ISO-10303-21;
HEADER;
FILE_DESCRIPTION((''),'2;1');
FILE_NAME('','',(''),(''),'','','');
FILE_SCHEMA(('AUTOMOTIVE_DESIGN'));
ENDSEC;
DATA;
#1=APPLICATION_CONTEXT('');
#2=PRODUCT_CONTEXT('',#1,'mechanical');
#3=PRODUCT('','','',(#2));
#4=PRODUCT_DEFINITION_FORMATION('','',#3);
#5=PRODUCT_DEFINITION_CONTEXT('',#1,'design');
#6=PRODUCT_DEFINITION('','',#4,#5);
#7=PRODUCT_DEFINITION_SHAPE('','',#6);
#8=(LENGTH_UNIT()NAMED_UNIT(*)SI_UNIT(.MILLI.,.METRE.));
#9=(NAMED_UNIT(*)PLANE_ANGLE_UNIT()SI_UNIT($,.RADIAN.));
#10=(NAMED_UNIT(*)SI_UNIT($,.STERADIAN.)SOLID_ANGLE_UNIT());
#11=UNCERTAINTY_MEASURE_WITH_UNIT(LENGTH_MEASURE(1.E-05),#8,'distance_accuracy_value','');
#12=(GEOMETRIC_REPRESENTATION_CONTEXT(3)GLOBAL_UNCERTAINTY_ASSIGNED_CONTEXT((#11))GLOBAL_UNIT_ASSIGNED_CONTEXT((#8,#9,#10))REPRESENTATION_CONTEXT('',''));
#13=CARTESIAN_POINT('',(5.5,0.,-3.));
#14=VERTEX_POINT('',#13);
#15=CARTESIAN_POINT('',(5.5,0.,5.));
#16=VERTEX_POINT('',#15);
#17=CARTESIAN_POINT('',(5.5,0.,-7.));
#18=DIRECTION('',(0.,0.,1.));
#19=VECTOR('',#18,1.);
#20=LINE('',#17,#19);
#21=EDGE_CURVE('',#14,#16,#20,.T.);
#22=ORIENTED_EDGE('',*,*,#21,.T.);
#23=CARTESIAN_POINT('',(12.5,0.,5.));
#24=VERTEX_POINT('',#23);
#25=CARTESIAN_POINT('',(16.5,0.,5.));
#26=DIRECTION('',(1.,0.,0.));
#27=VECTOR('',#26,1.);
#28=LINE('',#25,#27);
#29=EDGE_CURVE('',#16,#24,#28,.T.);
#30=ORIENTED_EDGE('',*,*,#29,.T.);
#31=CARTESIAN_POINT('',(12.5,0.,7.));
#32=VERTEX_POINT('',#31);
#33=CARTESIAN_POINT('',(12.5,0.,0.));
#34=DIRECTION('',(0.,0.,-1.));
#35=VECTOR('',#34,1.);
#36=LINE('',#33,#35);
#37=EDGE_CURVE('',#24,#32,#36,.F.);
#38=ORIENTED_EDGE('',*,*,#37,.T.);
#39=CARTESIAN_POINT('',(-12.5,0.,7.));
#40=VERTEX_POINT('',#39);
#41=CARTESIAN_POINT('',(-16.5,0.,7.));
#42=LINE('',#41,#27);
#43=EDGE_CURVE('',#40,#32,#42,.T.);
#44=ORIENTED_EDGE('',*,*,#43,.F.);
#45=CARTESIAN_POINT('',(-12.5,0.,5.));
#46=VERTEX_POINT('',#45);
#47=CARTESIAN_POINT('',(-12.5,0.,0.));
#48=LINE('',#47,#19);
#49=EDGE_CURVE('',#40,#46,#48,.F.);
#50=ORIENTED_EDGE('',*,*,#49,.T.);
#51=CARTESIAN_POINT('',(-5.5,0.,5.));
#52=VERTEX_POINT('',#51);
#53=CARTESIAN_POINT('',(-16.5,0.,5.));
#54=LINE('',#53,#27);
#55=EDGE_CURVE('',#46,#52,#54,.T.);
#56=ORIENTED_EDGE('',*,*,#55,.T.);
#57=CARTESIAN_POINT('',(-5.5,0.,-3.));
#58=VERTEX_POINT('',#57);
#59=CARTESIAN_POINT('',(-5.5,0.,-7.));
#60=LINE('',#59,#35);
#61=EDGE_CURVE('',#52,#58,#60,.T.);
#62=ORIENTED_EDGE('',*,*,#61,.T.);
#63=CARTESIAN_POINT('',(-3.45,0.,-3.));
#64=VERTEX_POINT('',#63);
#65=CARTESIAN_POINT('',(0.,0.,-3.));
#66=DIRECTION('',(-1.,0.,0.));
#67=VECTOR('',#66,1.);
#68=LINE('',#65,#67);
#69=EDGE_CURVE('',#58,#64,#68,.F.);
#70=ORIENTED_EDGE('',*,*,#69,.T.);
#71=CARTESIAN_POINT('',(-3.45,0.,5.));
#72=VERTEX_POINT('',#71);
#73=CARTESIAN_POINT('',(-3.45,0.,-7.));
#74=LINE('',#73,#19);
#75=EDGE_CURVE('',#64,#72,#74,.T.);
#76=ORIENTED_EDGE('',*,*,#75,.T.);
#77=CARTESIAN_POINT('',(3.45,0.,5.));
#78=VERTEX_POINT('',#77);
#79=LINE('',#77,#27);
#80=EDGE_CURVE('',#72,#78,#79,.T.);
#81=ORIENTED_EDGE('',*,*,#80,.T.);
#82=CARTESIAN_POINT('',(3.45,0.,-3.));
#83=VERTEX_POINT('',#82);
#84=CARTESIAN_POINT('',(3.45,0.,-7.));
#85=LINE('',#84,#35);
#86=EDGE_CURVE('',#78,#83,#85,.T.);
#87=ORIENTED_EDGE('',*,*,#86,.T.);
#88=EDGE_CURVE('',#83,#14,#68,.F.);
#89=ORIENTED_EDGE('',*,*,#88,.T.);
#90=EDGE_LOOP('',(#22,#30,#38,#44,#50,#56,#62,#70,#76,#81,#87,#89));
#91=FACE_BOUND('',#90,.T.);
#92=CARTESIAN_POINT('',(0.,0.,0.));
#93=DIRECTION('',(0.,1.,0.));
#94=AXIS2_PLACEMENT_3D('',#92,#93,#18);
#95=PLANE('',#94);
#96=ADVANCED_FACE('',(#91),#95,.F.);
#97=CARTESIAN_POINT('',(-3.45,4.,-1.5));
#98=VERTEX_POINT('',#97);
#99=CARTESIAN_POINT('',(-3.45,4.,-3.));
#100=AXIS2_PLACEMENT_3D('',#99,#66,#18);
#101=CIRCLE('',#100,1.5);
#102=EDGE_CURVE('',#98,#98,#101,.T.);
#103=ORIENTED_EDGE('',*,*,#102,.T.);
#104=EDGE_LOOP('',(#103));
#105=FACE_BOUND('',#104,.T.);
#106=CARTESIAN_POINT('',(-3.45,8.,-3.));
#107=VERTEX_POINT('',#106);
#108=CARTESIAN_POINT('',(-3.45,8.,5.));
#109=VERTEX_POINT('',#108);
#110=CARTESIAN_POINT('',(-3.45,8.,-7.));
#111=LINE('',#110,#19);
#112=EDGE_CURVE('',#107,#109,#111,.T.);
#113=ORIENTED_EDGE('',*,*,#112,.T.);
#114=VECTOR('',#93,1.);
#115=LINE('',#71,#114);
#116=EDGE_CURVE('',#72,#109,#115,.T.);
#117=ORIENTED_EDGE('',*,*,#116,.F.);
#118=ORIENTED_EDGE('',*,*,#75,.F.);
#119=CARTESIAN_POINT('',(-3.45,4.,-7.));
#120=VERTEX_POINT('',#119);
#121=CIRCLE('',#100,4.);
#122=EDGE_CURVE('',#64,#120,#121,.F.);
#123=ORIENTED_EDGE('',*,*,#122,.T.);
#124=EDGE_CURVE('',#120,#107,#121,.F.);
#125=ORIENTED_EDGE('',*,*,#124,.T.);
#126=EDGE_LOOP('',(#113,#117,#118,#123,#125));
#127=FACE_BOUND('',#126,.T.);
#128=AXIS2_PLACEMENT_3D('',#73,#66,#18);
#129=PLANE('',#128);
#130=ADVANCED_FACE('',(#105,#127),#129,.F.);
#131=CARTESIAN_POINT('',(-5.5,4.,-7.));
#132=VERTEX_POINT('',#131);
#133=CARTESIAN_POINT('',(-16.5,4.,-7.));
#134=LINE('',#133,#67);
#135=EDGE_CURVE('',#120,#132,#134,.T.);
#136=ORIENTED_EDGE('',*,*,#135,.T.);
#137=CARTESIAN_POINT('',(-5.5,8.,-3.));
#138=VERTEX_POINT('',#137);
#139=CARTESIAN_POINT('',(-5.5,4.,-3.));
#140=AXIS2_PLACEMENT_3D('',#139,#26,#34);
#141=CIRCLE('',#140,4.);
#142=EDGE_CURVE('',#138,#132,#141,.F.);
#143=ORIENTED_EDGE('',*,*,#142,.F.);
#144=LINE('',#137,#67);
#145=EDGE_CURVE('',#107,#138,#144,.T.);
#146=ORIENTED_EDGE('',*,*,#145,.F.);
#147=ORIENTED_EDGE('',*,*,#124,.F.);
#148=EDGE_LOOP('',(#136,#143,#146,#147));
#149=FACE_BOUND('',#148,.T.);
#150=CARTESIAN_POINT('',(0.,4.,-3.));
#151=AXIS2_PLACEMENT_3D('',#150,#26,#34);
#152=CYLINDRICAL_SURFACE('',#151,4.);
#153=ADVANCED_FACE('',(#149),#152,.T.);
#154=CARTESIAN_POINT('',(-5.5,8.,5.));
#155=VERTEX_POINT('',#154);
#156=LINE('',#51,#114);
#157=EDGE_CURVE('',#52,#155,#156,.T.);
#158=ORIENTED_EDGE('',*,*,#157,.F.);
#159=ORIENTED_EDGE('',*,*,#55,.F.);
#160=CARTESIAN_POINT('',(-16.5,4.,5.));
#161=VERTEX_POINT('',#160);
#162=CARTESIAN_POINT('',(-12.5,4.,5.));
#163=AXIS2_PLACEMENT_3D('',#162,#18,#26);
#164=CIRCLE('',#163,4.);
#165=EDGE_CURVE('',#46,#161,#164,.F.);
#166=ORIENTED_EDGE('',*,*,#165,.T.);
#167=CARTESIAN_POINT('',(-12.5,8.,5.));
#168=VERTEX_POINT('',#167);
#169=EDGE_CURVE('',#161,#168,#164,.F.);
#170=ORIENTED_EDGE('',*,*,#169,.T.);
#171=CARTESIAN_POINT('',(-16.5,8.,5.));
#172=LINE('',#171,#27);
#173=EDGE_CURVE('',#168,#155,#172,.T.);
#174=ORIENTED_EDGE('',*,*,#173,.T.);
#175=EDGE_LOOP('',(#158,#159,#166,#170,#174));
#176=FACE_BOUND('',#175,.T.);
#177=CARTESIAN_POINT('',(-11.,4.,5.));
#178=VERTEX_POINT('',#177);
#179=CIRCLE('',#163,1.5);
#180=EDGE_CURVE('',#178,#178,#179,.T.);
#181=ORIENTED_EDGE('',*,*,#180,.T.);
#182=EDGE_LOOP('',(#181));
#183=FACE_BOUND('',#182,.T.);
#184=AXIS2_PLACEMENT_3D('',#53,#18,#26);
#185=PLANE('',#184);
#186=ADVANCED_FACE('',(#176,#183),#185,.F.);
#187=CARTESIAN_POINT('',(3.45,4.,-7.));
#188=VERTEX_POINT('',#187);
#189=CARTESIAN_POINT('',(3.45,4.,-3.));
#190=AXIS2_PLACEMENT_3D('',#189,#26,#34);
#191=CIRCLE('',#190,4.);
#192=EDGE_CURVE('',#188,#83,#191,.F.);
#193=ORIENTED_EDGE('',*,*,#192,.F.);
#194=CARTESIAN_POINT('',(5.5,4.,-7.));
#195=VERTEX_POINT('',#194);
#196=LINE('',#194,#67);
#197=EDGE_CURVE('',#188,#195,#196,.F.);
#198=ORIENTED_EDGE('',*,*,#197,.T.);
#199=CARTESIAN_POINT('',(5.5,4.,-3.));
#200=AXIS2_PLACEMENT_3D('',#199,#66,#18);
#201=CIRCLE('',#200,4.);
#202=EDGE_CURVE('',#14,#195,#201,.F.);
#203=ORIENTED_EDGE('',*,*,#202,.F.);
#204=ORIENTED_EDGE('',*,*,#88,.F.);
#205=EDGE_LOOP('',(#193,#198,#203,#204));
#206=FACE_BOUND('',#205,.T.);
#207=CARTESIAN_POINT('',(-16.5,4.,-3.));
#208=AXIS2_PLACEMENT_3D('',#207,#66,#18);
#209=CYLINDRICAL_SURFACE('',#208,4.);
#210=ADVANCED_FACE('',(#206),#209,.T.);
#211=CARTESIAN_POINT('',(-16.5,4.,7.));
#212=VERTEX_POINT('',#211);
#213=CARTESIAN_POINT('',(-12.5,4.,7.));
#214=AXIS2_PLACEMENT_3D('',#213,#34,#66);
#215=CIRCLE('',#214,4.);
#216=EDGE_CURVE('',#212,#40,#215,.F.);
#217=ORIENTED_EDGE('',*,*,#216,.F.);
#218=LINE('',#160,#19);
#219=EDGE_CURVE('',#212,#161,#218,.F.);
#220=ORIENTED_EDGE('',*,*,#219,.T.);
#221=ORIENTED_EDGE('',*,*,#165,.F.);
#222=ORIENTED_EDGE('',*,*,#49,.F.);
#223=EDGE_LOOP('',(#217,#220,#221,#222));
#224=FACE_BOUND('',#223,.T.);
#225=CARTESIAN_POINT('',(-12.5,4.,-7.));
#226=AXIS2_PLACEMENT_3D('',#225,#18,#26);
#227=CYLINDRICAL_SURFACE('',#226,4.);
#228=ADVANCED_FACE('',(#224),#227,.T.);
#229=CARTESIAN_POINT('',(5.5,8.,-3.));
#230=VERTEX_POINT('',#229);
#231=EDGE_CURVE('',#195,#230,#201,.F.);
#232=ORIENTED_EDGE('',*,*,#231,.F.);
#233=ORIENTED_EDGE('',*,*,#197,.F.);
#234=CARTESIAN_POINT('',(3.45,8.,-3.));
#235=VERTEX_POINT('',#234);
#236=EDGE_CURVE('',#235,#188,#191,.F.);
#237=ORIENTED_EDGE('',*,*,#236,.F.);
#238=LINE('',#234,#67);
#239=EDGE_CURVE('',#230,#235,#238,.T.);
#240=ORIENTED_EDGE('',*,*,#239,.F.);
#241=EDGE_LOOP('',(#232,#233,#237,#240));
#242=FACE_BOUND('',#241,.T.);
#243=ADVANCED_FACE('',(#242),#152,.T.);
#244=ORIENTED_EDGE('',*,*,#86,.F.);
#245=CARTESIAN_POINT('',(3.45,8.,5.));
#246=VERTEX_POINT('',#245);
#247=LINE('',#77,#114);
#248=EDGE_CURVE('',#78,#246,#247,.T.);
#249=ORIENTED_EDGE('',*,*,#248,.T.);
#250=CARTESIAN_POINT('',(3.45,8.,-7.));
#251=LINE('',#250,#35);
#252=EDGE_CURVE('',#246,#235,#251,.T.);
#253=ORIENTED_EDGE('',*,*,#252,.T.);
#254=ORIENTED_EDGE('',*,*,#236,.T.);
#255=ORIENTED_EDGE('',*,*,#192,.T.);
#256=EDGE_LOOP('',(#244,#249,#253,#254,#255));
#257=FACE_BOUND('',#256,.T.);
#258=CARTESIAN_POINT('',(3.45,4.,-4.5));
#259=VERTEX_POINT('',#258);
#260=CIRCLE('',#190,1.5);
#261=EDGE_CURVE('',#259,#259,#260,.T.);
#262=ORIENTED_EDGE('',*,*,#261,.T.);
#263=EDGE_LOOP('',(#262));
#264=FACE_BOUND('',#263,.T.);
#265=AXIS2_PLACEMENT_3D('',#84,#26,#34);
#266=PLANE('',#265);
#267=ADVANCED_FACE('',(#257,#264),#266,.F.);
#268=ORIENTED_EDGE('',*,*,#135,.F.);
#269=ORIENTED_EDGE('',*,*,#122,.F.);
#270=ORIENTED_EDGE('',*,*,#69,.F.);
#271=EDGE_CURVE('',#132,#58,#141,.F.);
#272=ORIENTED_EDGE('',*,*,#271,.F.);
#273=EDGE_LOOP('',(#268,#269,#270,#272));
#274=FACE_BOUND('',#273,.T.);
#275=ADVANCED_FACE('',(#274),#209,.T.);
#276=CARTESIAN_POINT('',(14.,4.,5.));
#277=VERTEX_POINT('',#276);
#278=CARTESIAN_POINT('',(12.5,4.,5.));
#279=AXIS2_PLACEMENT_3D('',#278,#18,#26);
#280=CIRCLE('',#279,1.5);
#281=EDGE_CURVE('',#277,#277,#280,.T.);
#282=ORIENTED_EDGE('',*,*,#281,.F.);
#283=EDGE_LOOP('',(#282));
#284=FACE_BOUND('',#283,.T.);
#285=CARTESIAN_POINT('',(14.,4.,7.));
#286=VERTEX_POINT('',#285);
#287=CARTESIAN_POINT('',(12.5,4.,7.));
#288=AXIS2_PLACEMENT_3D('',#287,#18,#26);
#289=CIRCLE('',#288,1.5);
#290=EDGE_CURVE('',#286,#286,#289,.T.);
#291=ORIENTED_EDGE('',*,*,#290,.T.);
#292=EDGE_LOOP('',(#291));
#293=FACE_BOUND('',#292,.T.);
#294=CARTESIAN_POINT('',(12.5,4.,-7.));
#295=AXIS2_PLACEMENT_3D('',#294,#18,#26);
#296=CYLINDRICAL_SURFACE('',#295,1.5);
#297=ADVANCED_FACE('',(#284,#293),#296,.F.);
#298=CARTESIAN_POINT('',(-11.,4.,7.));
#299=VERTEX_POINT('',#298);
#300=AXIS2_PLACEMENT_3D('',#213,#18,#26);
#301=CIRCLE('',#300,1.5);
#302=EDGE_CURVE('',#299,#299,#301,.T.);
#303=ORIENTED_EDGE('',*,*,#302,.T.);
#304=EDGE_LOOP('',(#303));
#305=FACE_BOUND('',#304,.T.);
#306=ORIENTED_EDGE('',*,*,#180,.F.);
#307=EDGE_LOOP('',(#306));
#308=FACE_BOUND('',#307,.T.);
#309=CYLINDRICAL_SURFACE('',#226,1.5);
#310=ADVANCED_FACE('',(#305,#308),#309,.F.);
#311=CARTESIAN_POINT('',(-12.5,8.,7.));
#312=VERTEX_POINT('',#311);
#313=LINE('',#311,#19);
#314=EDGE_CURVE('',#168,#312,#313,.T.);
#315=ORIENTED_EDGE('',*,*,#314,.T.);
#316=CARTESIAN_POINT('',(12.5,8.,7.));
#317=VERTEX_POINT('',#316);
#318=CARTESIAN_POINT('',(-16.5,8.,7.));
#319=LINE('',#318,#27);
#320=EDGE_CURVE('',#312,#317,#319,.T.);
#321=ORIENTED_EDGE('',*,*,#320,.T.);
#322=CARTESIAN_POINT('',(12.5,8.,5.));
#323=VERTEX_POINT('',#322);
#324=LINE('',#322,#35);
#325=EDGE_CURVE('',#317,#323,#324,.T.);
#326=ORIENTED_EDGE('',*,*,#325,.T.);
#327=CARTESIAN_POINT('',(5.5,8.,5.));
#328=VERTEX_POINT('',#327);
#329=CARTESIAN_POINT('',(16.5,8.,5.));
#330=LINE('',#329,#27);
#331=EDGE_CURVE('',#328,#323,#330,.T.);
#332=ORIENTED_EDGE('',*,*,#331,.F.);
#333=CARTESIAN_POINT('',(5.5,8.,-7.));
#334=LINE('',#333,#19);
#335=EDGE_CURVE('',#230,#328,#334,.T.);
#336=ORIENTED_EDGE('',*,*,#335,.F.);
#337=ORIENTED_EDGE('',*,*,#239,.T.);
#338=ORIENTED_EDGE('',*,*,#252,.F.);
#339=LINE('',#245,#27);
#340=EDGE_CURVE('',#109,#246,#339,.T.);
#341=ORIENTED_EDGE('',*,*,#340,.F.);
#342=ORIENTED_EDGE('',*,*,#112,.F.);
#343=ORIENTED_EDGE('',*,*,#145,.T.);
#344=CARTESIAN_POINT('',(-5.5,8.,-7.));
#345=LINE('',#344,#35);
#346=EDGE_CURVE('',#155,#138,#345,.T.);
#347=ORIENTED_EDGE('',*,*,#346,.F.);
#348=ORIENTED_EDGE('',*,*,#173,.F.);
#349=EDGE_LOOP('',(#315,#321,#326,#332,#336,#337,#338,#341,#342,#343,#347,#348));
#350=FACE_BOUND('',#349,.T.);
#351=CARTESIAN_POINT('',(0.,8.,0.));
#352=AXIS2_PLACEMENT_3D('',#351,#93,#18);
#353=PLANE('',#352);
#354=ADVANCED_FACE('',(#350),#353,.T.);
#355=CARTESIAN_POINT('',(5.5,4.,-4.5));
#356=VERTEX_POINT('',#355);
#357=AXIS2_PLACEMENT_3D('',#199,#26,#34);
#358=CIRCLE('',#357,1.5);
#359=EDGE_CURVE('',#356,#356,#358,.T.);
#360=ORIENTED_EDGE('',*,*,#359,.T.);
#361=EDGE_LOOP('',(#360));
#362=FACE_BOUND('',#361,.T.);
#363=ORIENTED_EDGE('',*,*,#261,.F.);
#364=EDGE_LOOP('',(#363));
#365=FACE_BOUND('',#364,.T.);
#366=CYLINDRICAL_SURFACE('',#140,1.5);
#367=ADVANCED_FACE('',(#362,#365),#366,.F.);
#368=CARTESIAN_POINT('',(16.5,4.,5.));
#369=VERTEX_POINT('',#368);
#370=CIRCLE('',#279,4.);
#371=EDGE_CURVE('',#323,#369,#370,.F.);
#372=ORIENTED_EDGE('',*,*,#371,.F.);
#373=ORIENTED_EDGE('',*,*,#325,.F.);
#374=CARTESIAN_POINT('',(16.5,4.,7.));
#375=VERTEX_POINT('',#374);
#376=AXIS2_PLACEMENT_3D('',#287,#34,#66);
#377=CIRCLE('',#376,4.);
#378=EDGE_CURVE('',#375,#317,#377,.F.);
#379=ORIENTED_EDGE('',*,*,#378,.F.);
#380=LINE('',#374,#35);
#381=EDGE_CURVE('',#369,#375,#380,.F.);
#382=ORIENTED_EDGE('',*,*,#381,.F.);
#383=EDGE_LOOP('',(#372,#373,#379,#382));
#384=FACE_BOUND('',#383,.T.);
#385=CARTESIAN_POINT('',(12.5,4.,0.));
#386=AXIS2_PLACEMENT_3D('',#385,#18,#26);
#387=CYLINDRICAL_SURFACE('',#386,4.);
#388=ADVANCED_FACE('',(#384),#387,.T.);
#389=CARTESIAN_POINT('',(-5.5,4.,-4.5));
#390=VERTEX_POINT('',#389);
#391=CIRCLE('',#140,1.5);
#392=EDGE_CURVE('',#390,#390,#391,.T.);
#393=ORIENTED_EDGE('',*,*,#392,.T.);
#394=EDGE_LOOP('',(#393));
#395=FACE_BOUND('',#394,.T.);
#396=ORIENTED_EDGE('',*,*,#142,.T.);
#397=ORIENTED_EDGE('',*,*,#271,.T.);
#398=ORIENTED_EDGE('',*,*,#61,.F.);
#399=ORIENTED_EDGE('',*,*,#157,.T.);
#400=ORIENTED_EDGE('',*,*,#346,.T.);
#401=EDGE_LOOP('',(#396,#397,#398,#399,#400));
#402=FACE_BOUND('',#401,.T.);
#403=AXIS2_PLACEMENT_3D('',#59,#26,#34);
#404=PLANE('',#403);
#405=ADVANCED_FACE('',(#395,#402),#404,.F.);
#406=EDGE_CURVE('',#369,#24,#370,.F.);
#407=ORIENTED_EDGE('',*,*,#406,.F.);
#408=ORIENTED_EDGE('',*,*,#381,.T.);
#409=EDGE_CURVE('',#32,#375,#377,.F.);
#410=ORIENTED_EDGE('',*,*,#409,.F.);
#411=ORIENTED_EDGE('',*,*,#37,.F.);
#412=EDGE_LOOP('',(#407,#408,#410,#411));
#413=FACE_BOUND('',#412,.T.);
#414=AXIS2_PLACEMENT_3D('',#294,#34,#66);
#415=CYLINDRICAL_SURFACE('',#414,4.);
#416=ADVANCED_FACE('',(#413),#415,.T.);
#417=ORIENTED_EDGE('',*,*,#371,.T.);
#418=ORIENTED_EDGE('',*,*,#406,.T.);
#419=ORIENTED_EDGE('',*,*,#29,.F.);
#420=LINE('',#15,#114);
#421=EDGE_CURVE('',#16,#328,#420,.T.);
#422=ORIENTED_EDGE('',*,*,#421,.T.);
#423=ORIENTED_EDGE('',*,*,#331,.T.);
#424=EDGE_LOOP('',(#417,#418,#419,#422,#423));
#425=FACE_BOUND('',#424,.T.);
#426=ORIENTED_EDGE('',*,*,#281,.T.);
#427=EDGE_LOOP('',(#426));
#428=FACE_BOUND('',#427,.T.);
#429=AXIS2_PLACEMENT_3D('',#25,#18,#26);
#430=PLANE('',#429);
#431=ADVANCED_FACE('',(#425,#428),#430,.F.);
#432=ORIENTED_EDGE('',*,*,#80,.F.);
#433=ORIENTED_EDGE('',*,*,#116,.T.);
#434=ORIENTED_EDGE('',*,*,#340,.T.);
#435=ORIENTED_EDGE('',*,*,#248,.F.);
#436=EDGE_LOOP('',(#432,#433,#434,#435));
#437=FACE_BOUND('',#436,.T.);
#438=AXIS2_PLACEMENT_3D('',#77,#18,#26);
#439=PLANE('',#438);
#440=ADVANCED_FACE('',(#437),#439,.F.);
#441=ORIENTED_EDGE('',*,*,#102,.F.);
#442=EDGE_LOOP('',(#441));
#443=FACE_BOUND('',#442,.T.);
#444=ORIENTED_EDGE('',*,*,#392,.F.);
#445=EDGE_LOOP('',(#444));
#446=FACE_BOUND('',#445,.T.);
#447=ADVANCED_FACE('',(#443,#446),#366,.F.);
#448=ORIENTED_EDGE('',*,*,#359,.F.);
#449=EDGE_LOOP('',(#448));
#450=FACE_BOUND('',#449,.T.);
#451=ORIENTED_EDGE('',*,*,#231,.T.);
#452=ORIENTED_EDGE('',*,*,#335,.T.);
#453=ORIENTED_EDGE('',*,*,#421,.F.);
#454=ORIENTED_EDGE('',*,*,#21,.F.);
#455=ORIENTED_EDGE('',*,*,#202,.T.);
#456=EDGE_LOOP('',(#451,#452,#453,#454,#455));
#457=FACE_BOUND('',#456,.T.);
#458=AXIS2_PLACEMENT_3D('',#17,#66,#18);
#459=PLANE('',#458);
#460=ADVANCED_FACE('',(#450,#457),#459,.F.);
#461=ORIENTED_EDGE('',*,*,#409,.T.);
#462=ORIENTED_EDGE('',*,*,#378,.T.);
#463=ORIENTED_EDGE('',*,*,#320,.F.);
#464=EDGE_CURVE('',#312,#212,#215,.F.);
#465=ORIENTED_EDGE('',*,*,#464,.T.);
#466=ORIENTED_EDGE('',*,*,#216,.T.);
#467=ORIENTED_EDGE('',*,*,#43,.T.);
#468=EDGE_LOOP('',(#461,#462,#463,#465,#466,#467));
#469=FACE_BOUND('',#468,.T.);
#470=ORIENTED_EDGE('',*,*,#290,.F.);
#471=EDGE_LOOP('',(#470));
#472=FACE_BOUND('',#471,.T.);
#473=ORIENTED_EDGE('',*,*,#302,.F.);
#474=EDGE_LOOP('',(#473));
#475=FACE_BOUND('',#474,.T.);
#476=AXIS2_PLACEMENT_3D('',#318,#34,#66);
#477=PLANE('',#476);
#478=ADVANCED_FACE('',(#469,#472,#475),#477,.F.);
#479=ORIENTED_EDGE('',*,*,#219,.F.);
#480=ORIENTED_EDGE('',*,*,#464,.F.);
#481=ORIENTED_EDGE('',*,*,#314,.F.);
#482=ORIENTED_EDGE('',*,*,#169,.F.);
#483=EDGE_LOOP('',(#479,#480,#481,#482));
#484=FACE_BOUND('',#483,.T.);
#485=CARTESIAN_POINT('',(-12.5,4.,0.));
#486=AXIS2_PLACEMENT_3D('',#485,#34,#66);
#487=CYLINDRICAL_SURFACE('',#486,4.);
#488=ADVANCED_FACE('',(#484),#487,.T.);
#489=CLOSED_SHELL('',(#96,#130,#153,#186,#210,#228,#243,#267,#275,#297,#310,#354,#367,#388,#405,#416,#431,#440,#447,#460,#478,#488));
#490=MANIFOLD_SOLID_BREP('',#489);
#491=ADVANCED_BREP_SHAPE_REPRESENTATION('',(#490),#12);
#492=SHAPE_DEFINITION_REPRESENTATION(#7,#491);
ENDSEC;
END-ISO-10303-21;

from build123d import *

# Parameters (mm, degrees)
SKETCH_1_W          = 33
SKETCH_1_H          = 14
EXTRUDE_1_DEPTH     = 8
SKETCH_2_W          = 11
SKETCH_2_H          = 12
SKETCH_2_W_2        = 6.9
CUT_EXTRUDE_1_DEPTH = 20.627786426
FILLET_1_R          = 4
FILLET_2_R          = 4
SKETCH_3_R          = 1.5
CUT_EXTRUDE_2_DEPTH = 11
SKETCH_4_R          = 1.5
CUT_EXTRUDE_3_DEPTH = 24.07054399


with BuildPart() as part:
    # 草图1 → 凸台-拉伸1 (new body)
    with BuildSketch(Plane(origin=(0, 0, 0), x_dir=(1, 0, 0), z_dir=(0, 1, 0))):
        Rectangle(SKETCH_1_W, SKETCH_1_H)
    extrude(amount=EXTRUDE_1_DEPTH)

    # 草图2 → 切除-拉伸1 (cut, through all)
    with BuildSketch(Plane(origin=(0, 8, 0), x_dir=(1, 0, 0), z_dir=(0, 1, 0))):
        with Locations((-11, 1)):
            Rectangle(SKETCH_2_W, SKETCH_2_H)
        with Locations((11, 1)):
            Rectangle(SKETCH_2_W, SKETCH_2_H)
        with Locations((0, 1)):
            Rectangle(SKETCH_2_W_2, SKETCH_2_H)
    extrude(amount=-CUT_EXTRUDE_1_DEPTH, mode=Mode.SUBTRACT)

    # 圆角1
    fillet_1_edges = [part.edges().sort_by_distance(p)[0] for p in [
        (16.5, 0, 6),
        (16.5, 8, 6),
        (-16.5, 0, 6),
        (-16.5, 8, 6),
    ]]
    fillet(fillet_1_edges, radius=FILLET_1_R - 0.0001)  # a hair under: the kernel refuses the full size

    # 圆角2
    fillet_2_edges = [part.edges().sort_by_distance(p)[0] for p in [
        (-4.475, 8, -7),
        (-4.475, 0, -7),
        (4.475, 0, -7),
        (4.475, 8, -7),
    ]]
    fillet(fillet_2_edges, radius=FILLET_2_R - 0.0001)  # a hair under: the kernel refuses the full size

    # 草图3 → 切除-拉伸2 (cut)
    with BuildSketch(Plane(origin=(5.5, 0, 0), x_dir=(0, 0, -1), z_dir=(1, 0, 0))):
        with Locations((3, 4)):
            Circle(SKETCH_3_R)
    extrude(amount=-CUT_EXTRUDE_2_DEPTH, mode=Mode.SUBTRACT)

    # 草图4 → 切除-拉伸3 (cut, through all)
    with BuildSketch(Plane.XY.offset(7)):
        with Locations((12.5, 4)):
            Circle(SKETCH_4_R)
        with Locations((-12.5, 4)):
            Circle(SKETCH_4_R)
    extrude(amount=-CUT_EXTRUDE_3_DEPTH, mode=Mode.SUBTRACT)


solid = part.part
